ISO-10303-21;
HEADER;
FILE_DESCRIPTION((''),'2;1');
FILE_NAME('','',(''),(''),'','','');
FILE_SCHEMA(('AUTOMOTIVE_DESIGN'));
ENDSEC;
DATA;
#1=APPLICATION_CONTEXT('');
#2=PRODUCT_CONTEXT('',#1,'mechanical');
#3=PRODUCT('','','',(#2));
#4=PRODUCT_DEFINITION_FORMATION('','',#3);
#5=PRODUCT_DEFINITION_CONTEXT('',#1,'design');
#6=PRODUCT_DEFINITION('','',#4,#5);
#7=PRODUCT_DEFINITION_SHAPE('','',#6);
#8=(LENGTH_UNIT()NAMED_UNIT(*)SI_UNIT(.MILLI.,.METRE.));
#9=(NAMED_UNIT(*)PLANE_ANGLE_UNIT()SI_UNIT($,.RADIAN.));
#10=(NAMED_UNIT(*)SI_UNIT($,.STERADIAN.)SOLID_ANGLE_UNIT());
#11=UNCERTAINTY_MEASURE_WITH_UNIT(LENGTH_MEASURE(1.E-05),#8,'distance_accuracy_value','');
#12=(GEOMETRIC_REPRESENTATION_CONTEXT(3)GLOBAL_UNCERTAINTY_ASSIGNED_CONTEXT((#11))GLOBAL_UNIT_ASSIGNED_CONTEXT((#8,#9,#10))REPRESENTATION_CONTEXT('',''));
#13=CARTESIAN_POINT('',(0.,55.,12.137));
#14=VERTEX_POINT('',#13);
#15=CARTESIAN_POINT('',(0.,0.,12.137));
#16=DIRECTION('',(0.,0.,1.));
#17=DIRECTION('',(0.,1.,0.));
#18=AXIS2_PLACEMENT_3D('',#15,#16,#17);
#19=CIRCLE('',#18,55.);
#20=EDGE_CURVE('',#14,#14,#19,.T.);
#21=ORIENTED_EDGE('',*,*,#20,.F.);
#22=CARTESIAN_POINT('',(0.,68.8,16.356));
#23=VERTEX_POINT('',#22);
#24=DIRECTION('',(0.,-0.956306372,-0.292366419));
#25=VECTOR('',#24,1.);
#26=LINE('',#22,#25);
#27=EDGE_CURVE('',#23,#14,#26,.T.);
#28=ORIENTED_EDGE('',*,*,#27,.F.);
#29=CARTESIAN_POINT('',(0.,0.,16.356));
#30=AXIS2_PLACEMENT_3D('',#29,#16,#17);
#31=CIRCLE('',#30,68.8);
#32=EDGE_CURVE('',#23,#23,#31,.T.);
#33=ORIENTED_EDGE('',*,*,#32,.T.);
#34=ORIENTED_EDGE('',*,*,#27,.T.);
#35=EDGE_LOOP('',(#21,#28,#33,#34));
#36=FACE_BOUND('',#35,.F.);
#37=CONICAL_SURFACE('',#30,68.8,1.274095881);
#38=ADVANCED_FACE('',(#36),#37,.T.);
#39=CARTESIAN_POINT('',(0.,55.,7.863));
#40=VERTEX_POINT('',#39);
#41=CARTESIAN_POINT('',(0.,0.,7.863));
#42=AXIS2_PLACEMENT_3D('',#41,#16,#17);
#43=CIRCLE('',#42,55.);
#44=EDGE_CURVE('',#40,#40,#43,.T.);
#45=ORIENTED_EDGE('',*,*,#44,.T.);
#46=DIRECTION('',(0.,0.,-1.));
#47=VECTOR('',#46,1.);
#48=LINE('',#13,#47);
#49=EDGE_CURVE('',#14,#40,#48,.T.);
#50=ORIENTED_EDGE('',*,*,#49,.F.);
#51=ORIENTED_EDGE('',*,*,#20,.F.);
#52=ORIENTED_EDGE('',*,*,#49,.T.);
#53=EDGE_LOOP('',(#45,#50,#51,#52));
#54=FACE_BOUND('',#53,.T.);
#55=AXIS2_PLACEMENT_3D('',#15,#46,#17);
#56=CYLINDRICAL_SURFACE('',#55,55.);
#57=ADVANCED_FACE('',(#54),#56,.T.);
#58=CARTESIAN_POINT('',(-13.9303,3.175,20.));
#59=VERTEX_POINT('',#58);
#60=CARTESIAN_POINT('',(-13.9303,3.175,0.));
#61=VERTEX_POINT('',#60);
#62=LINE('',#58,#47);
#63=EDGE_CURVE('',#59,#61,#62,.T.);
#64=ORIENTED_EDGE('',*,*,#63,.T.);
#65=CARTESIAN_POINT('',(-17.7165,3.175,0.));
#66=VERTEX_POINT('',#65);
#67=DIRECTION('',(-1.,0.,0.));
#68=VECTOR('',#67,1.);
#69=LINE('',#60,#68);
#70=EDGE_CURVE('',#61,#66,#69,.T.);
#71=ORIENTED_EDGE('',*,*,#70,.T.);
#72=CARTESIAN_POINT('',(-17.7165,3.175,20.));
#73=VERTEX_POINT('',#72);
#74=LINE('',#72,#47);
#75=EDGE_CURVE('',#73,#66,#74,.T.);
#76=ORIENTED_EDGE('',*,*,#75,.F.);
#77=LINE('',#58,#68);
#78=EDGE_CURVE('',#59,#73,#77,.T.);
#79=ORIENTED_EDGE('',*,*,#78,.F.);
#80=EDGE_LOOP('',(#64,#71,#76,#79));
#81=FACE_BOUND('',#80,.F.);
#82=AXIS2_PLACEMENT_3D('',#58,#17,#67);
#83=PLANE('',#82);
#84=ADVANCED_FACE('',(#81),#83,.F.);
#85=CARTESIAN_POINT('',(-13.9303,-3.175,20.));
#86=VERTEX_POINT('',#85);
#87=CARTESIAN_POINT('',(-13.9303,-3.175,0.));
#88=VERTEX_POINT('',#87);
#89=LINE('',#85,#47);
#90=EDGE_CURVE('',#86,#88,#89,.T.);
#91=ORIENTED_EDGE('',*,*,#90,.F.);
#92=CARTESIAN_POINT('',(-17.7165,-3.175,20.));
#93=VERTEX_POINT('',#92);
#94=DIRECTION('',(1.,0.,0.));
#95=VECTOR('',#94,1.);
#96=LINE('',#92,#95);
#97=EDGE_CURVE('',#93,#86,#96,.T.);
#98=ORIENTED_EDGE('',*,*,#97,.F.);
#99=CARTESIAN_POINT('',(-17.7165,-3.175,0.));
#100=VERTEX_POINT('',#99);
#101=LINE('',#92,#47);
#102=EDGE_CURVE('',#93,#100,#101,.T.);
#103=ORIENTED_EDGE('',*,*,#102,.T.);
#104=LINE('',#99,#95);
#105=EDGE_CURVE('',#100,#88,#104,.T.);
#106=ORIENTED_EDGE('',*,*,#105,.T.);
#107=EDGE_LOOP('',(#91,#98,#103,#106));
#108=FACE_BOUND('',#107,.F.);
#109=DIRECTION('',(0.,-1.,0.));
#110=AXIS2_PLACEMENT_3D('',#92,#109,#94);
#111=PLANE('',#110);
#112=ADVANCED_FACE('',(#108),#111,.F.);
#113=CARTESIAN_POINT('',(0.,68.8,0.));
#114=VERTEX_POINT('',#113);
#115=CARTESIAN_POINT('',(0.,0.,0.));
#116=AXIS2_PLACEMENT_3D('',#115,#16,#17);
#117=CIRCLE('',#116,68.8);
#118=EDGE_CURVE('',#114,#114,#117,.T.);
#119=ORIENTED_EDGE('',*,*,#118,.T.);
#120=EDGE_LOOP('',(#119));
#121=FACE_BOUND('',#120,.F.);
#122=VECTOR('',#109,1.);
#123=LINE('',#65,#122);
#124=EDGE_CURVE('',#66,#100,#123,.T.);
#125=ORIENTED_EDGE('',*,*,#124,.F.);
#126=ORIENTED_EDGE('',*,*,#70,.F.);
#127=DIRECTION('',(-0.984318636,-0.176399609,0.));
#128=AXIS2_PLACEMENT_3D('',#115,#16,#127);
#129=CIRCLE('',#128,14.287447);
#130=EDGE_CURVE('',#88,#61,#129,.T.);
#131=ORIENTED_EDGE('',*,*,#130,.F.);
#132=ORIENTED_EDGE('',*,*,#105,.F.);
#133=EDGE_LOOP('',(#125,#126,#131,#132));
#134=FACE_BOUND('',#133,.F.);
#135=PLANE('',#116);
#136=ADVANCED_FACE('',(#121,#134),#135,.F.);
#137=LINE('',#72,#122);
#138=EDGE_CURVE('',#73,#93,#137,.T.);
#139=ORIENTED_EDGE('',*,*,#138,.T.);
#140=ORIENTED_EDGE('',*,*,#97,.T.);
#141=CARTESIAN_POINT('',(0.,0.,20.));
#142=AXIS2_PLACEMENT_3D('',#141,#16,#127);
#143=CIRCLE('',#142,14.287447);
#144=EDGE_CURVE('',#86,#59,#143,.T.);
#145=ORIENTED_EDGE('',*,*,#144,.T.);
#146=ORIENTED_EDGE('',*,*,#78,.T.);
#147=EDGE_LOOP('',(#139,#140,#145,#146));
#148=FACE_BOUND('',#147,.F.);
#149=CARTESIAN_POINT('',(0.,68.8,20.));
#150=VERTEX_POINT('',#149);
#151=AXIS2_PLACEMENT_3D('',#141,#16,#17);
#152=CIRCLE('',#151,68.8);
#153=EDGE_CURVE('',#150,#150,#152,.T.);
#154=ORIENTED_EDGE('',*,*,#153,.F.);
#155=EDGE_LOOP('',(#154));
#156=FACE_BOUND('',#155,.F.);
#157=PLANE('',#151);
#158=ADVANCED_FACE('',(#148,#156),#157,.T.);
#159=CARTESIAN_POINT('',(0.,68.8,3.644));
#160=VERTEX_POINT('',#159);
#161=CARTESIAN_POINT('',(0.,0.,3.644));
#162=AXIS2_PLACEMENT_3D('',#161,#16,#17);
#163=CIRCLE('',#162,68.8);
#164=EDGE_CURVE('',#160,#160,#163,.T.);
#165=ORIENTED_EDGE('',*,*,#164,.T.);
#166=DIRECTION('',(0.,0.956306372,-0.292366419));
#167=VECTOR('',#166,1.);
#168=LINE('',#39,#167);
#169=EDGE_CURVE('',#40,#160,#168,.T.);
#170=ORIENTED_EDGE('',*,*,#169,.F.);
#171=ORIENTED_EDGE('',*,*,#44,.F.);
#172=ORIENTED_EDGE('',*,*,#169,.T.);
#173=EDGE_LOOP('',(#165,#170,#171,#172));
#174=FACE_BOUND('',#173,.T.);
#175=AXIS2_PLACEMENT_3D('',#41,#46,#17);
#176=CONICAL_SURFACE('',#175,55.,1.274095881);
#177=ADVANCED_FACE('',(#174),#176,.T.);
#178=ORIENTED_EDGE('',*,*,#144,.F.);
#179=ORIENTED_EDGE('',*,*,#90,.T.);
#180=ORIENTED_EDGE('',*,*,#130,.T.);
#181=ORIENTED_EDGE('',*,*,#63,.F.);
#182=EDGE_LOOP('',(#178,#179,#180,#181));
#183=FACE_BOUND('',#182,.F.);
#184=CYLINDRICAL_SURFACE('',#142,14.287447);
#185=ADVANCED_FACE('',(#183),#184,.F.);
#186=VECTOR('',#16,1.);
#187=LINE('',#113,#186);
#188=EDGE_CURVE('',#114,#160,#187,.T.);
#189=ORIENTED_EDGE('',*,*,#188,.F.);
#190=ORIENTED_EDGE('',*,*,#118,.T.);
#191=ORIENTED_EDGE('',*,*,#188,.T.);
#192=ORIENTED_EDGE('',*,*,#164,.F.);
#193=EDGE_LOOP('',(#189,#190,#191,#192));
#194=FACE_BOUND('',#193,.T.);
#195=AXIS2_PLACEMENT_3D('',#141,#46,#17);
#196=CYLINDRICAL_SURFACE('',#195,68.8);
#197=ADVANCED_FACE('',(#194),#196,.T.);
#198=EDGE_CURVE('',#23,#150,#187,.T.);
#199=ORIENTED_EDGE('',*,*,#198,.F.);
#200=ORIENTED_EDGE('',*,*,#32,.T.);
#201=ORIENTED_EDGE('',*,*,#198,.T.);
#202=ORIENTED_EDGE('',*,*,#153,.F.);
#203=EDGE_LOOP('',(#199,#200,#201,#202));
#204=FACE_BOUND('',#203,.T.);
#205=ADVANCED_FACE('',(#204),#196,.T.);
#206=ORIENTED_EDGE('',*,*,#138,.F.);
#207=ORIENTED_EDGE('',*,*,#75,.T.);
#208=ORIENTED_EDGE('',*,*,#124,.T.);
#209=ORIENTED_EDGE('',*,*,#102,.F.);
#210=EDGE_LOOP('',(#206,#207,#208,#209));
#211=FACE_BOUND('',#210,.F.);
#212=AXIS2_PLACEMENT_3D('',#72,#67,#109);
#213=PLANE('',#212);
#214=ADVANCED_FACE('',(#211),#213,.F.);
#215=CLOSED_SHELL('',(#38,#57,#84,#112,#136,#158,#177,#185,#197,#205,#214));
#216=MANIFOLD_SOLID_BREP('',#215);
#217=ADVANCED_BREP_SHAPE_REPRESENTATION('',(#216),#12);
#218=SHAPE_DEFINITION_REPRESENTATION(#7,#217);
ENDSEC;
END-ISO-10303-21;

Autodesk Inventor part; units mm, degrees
ref_plane "YZ Plane" through (0, 0, 0) normal (1, 0, 0) x (0, 1, 0)
ref_plane "XZ Plane" through (0, 0, 0) normal (0, 1, 0) x (-1, 0, 0)
sketch "Boceto principal" plane through (0, 0, 0) normal (1, 0, 0) x (0, 1, 0)
  line L0 (0, 20) -> (68.8, 20)
  line L1 (68.8, 20) -> (68.8, 16.356)
  line L2 (68.8, 16.356) -> (55, 12.137)
  line L3 (55, 12.137) -> (55, 7.863)
  line L4 (55, 7.863) -> (68.8, 3.644)
  line L5 (68.8, 3.644) -> (68.8, 0)
  line L6 (68.8, 0) -> (0, 0)
  line L7 (66, 15.5) -> (66, 4.5) construction
  line L8 (55, 10) -> (66, 10) construction
  line L9 (68.8, 16.356) -> (68.8, 3.644)
  line L10 (0, -4) -> (0, 24) projected
  line L11 (0, 0) -> (0, 20)
  dimension "d0" = 11
  dimension "d1" = 34
  dimension "d2" = 2.8
  dimension "d6" = 20
  dimension "d21" = 132
  dimension "d25" = 13.8
  dimension "d27" = 10
ref_plane "Plano de correa" through (0, 55, 10) normal (0, 0, 1) x (1, 0, 0)
revolve "Cuerpo" add sketch "Boceto principal" angle 360 about axis through (0, 0, -10) along (0, 0, 1)
revolve "Para ranuras" cut sketch "Boceto principal" angle 360 about axis through (0, 0, -10) along (0, 0, 1) contours L9 L4 L3 L2
fillet "Empalme externo" [suppressed]
fillet "Empalme interno" [suppressed]
pattern_of_one "Patrón para ranuras"
sketch "Boceto2" plane through (0, 0, 20) normal (0, 0, 1) x (1, 0, 0)
  arc A0 (-14.0634, -2.5203) -> (-14.0634, 2.5203) centre (0, 0) ccw
  line L0 (-17.7165, -3.175) -> (-13.9303, -3.175)
  line L1 (-13.9303, 3.175) -> (-17.7165, 3.175)
  line L2 (-17.7165, 3.175) -> (-17.7165, -3.175)
  line L3 (-17.7165, -3.175) -> (17.7165, 3.175) construction
  line L4 (17.7165, -3.175) -> (-17.7165, 3.175) construction
  dimension "d28" = 28.575
extrude "Extrusión1" cut sketch "Boceto2" against normal blind 20
equation "\"d0\" = da_Bw"
equation "\"d1\" = da_Alfa"
equation "\"d2\" = da_c"
equation "\"d21\" = da_Dw"
equation "\"d25\" = da_Hd"
equation "\"d27\" = da_Se"
equation "\"da_r1\" = 0"
equation "\"da_r2\" = 0"
equation "\"d18\" = da_Sg"
equation "\"da_Bw\" = 11"
equation "\"da_Alfa\" = 34deg"
equation "\"da_c\" = 2.8"
equation "\"da_Dw\" = 132"
equation "\"da_Hd\" = 13.8"
equation "\"da_Se\" = 10"
equation "\"da_Sg\" = 15"
properties part number "Polea ranurada1" material "Steel"
